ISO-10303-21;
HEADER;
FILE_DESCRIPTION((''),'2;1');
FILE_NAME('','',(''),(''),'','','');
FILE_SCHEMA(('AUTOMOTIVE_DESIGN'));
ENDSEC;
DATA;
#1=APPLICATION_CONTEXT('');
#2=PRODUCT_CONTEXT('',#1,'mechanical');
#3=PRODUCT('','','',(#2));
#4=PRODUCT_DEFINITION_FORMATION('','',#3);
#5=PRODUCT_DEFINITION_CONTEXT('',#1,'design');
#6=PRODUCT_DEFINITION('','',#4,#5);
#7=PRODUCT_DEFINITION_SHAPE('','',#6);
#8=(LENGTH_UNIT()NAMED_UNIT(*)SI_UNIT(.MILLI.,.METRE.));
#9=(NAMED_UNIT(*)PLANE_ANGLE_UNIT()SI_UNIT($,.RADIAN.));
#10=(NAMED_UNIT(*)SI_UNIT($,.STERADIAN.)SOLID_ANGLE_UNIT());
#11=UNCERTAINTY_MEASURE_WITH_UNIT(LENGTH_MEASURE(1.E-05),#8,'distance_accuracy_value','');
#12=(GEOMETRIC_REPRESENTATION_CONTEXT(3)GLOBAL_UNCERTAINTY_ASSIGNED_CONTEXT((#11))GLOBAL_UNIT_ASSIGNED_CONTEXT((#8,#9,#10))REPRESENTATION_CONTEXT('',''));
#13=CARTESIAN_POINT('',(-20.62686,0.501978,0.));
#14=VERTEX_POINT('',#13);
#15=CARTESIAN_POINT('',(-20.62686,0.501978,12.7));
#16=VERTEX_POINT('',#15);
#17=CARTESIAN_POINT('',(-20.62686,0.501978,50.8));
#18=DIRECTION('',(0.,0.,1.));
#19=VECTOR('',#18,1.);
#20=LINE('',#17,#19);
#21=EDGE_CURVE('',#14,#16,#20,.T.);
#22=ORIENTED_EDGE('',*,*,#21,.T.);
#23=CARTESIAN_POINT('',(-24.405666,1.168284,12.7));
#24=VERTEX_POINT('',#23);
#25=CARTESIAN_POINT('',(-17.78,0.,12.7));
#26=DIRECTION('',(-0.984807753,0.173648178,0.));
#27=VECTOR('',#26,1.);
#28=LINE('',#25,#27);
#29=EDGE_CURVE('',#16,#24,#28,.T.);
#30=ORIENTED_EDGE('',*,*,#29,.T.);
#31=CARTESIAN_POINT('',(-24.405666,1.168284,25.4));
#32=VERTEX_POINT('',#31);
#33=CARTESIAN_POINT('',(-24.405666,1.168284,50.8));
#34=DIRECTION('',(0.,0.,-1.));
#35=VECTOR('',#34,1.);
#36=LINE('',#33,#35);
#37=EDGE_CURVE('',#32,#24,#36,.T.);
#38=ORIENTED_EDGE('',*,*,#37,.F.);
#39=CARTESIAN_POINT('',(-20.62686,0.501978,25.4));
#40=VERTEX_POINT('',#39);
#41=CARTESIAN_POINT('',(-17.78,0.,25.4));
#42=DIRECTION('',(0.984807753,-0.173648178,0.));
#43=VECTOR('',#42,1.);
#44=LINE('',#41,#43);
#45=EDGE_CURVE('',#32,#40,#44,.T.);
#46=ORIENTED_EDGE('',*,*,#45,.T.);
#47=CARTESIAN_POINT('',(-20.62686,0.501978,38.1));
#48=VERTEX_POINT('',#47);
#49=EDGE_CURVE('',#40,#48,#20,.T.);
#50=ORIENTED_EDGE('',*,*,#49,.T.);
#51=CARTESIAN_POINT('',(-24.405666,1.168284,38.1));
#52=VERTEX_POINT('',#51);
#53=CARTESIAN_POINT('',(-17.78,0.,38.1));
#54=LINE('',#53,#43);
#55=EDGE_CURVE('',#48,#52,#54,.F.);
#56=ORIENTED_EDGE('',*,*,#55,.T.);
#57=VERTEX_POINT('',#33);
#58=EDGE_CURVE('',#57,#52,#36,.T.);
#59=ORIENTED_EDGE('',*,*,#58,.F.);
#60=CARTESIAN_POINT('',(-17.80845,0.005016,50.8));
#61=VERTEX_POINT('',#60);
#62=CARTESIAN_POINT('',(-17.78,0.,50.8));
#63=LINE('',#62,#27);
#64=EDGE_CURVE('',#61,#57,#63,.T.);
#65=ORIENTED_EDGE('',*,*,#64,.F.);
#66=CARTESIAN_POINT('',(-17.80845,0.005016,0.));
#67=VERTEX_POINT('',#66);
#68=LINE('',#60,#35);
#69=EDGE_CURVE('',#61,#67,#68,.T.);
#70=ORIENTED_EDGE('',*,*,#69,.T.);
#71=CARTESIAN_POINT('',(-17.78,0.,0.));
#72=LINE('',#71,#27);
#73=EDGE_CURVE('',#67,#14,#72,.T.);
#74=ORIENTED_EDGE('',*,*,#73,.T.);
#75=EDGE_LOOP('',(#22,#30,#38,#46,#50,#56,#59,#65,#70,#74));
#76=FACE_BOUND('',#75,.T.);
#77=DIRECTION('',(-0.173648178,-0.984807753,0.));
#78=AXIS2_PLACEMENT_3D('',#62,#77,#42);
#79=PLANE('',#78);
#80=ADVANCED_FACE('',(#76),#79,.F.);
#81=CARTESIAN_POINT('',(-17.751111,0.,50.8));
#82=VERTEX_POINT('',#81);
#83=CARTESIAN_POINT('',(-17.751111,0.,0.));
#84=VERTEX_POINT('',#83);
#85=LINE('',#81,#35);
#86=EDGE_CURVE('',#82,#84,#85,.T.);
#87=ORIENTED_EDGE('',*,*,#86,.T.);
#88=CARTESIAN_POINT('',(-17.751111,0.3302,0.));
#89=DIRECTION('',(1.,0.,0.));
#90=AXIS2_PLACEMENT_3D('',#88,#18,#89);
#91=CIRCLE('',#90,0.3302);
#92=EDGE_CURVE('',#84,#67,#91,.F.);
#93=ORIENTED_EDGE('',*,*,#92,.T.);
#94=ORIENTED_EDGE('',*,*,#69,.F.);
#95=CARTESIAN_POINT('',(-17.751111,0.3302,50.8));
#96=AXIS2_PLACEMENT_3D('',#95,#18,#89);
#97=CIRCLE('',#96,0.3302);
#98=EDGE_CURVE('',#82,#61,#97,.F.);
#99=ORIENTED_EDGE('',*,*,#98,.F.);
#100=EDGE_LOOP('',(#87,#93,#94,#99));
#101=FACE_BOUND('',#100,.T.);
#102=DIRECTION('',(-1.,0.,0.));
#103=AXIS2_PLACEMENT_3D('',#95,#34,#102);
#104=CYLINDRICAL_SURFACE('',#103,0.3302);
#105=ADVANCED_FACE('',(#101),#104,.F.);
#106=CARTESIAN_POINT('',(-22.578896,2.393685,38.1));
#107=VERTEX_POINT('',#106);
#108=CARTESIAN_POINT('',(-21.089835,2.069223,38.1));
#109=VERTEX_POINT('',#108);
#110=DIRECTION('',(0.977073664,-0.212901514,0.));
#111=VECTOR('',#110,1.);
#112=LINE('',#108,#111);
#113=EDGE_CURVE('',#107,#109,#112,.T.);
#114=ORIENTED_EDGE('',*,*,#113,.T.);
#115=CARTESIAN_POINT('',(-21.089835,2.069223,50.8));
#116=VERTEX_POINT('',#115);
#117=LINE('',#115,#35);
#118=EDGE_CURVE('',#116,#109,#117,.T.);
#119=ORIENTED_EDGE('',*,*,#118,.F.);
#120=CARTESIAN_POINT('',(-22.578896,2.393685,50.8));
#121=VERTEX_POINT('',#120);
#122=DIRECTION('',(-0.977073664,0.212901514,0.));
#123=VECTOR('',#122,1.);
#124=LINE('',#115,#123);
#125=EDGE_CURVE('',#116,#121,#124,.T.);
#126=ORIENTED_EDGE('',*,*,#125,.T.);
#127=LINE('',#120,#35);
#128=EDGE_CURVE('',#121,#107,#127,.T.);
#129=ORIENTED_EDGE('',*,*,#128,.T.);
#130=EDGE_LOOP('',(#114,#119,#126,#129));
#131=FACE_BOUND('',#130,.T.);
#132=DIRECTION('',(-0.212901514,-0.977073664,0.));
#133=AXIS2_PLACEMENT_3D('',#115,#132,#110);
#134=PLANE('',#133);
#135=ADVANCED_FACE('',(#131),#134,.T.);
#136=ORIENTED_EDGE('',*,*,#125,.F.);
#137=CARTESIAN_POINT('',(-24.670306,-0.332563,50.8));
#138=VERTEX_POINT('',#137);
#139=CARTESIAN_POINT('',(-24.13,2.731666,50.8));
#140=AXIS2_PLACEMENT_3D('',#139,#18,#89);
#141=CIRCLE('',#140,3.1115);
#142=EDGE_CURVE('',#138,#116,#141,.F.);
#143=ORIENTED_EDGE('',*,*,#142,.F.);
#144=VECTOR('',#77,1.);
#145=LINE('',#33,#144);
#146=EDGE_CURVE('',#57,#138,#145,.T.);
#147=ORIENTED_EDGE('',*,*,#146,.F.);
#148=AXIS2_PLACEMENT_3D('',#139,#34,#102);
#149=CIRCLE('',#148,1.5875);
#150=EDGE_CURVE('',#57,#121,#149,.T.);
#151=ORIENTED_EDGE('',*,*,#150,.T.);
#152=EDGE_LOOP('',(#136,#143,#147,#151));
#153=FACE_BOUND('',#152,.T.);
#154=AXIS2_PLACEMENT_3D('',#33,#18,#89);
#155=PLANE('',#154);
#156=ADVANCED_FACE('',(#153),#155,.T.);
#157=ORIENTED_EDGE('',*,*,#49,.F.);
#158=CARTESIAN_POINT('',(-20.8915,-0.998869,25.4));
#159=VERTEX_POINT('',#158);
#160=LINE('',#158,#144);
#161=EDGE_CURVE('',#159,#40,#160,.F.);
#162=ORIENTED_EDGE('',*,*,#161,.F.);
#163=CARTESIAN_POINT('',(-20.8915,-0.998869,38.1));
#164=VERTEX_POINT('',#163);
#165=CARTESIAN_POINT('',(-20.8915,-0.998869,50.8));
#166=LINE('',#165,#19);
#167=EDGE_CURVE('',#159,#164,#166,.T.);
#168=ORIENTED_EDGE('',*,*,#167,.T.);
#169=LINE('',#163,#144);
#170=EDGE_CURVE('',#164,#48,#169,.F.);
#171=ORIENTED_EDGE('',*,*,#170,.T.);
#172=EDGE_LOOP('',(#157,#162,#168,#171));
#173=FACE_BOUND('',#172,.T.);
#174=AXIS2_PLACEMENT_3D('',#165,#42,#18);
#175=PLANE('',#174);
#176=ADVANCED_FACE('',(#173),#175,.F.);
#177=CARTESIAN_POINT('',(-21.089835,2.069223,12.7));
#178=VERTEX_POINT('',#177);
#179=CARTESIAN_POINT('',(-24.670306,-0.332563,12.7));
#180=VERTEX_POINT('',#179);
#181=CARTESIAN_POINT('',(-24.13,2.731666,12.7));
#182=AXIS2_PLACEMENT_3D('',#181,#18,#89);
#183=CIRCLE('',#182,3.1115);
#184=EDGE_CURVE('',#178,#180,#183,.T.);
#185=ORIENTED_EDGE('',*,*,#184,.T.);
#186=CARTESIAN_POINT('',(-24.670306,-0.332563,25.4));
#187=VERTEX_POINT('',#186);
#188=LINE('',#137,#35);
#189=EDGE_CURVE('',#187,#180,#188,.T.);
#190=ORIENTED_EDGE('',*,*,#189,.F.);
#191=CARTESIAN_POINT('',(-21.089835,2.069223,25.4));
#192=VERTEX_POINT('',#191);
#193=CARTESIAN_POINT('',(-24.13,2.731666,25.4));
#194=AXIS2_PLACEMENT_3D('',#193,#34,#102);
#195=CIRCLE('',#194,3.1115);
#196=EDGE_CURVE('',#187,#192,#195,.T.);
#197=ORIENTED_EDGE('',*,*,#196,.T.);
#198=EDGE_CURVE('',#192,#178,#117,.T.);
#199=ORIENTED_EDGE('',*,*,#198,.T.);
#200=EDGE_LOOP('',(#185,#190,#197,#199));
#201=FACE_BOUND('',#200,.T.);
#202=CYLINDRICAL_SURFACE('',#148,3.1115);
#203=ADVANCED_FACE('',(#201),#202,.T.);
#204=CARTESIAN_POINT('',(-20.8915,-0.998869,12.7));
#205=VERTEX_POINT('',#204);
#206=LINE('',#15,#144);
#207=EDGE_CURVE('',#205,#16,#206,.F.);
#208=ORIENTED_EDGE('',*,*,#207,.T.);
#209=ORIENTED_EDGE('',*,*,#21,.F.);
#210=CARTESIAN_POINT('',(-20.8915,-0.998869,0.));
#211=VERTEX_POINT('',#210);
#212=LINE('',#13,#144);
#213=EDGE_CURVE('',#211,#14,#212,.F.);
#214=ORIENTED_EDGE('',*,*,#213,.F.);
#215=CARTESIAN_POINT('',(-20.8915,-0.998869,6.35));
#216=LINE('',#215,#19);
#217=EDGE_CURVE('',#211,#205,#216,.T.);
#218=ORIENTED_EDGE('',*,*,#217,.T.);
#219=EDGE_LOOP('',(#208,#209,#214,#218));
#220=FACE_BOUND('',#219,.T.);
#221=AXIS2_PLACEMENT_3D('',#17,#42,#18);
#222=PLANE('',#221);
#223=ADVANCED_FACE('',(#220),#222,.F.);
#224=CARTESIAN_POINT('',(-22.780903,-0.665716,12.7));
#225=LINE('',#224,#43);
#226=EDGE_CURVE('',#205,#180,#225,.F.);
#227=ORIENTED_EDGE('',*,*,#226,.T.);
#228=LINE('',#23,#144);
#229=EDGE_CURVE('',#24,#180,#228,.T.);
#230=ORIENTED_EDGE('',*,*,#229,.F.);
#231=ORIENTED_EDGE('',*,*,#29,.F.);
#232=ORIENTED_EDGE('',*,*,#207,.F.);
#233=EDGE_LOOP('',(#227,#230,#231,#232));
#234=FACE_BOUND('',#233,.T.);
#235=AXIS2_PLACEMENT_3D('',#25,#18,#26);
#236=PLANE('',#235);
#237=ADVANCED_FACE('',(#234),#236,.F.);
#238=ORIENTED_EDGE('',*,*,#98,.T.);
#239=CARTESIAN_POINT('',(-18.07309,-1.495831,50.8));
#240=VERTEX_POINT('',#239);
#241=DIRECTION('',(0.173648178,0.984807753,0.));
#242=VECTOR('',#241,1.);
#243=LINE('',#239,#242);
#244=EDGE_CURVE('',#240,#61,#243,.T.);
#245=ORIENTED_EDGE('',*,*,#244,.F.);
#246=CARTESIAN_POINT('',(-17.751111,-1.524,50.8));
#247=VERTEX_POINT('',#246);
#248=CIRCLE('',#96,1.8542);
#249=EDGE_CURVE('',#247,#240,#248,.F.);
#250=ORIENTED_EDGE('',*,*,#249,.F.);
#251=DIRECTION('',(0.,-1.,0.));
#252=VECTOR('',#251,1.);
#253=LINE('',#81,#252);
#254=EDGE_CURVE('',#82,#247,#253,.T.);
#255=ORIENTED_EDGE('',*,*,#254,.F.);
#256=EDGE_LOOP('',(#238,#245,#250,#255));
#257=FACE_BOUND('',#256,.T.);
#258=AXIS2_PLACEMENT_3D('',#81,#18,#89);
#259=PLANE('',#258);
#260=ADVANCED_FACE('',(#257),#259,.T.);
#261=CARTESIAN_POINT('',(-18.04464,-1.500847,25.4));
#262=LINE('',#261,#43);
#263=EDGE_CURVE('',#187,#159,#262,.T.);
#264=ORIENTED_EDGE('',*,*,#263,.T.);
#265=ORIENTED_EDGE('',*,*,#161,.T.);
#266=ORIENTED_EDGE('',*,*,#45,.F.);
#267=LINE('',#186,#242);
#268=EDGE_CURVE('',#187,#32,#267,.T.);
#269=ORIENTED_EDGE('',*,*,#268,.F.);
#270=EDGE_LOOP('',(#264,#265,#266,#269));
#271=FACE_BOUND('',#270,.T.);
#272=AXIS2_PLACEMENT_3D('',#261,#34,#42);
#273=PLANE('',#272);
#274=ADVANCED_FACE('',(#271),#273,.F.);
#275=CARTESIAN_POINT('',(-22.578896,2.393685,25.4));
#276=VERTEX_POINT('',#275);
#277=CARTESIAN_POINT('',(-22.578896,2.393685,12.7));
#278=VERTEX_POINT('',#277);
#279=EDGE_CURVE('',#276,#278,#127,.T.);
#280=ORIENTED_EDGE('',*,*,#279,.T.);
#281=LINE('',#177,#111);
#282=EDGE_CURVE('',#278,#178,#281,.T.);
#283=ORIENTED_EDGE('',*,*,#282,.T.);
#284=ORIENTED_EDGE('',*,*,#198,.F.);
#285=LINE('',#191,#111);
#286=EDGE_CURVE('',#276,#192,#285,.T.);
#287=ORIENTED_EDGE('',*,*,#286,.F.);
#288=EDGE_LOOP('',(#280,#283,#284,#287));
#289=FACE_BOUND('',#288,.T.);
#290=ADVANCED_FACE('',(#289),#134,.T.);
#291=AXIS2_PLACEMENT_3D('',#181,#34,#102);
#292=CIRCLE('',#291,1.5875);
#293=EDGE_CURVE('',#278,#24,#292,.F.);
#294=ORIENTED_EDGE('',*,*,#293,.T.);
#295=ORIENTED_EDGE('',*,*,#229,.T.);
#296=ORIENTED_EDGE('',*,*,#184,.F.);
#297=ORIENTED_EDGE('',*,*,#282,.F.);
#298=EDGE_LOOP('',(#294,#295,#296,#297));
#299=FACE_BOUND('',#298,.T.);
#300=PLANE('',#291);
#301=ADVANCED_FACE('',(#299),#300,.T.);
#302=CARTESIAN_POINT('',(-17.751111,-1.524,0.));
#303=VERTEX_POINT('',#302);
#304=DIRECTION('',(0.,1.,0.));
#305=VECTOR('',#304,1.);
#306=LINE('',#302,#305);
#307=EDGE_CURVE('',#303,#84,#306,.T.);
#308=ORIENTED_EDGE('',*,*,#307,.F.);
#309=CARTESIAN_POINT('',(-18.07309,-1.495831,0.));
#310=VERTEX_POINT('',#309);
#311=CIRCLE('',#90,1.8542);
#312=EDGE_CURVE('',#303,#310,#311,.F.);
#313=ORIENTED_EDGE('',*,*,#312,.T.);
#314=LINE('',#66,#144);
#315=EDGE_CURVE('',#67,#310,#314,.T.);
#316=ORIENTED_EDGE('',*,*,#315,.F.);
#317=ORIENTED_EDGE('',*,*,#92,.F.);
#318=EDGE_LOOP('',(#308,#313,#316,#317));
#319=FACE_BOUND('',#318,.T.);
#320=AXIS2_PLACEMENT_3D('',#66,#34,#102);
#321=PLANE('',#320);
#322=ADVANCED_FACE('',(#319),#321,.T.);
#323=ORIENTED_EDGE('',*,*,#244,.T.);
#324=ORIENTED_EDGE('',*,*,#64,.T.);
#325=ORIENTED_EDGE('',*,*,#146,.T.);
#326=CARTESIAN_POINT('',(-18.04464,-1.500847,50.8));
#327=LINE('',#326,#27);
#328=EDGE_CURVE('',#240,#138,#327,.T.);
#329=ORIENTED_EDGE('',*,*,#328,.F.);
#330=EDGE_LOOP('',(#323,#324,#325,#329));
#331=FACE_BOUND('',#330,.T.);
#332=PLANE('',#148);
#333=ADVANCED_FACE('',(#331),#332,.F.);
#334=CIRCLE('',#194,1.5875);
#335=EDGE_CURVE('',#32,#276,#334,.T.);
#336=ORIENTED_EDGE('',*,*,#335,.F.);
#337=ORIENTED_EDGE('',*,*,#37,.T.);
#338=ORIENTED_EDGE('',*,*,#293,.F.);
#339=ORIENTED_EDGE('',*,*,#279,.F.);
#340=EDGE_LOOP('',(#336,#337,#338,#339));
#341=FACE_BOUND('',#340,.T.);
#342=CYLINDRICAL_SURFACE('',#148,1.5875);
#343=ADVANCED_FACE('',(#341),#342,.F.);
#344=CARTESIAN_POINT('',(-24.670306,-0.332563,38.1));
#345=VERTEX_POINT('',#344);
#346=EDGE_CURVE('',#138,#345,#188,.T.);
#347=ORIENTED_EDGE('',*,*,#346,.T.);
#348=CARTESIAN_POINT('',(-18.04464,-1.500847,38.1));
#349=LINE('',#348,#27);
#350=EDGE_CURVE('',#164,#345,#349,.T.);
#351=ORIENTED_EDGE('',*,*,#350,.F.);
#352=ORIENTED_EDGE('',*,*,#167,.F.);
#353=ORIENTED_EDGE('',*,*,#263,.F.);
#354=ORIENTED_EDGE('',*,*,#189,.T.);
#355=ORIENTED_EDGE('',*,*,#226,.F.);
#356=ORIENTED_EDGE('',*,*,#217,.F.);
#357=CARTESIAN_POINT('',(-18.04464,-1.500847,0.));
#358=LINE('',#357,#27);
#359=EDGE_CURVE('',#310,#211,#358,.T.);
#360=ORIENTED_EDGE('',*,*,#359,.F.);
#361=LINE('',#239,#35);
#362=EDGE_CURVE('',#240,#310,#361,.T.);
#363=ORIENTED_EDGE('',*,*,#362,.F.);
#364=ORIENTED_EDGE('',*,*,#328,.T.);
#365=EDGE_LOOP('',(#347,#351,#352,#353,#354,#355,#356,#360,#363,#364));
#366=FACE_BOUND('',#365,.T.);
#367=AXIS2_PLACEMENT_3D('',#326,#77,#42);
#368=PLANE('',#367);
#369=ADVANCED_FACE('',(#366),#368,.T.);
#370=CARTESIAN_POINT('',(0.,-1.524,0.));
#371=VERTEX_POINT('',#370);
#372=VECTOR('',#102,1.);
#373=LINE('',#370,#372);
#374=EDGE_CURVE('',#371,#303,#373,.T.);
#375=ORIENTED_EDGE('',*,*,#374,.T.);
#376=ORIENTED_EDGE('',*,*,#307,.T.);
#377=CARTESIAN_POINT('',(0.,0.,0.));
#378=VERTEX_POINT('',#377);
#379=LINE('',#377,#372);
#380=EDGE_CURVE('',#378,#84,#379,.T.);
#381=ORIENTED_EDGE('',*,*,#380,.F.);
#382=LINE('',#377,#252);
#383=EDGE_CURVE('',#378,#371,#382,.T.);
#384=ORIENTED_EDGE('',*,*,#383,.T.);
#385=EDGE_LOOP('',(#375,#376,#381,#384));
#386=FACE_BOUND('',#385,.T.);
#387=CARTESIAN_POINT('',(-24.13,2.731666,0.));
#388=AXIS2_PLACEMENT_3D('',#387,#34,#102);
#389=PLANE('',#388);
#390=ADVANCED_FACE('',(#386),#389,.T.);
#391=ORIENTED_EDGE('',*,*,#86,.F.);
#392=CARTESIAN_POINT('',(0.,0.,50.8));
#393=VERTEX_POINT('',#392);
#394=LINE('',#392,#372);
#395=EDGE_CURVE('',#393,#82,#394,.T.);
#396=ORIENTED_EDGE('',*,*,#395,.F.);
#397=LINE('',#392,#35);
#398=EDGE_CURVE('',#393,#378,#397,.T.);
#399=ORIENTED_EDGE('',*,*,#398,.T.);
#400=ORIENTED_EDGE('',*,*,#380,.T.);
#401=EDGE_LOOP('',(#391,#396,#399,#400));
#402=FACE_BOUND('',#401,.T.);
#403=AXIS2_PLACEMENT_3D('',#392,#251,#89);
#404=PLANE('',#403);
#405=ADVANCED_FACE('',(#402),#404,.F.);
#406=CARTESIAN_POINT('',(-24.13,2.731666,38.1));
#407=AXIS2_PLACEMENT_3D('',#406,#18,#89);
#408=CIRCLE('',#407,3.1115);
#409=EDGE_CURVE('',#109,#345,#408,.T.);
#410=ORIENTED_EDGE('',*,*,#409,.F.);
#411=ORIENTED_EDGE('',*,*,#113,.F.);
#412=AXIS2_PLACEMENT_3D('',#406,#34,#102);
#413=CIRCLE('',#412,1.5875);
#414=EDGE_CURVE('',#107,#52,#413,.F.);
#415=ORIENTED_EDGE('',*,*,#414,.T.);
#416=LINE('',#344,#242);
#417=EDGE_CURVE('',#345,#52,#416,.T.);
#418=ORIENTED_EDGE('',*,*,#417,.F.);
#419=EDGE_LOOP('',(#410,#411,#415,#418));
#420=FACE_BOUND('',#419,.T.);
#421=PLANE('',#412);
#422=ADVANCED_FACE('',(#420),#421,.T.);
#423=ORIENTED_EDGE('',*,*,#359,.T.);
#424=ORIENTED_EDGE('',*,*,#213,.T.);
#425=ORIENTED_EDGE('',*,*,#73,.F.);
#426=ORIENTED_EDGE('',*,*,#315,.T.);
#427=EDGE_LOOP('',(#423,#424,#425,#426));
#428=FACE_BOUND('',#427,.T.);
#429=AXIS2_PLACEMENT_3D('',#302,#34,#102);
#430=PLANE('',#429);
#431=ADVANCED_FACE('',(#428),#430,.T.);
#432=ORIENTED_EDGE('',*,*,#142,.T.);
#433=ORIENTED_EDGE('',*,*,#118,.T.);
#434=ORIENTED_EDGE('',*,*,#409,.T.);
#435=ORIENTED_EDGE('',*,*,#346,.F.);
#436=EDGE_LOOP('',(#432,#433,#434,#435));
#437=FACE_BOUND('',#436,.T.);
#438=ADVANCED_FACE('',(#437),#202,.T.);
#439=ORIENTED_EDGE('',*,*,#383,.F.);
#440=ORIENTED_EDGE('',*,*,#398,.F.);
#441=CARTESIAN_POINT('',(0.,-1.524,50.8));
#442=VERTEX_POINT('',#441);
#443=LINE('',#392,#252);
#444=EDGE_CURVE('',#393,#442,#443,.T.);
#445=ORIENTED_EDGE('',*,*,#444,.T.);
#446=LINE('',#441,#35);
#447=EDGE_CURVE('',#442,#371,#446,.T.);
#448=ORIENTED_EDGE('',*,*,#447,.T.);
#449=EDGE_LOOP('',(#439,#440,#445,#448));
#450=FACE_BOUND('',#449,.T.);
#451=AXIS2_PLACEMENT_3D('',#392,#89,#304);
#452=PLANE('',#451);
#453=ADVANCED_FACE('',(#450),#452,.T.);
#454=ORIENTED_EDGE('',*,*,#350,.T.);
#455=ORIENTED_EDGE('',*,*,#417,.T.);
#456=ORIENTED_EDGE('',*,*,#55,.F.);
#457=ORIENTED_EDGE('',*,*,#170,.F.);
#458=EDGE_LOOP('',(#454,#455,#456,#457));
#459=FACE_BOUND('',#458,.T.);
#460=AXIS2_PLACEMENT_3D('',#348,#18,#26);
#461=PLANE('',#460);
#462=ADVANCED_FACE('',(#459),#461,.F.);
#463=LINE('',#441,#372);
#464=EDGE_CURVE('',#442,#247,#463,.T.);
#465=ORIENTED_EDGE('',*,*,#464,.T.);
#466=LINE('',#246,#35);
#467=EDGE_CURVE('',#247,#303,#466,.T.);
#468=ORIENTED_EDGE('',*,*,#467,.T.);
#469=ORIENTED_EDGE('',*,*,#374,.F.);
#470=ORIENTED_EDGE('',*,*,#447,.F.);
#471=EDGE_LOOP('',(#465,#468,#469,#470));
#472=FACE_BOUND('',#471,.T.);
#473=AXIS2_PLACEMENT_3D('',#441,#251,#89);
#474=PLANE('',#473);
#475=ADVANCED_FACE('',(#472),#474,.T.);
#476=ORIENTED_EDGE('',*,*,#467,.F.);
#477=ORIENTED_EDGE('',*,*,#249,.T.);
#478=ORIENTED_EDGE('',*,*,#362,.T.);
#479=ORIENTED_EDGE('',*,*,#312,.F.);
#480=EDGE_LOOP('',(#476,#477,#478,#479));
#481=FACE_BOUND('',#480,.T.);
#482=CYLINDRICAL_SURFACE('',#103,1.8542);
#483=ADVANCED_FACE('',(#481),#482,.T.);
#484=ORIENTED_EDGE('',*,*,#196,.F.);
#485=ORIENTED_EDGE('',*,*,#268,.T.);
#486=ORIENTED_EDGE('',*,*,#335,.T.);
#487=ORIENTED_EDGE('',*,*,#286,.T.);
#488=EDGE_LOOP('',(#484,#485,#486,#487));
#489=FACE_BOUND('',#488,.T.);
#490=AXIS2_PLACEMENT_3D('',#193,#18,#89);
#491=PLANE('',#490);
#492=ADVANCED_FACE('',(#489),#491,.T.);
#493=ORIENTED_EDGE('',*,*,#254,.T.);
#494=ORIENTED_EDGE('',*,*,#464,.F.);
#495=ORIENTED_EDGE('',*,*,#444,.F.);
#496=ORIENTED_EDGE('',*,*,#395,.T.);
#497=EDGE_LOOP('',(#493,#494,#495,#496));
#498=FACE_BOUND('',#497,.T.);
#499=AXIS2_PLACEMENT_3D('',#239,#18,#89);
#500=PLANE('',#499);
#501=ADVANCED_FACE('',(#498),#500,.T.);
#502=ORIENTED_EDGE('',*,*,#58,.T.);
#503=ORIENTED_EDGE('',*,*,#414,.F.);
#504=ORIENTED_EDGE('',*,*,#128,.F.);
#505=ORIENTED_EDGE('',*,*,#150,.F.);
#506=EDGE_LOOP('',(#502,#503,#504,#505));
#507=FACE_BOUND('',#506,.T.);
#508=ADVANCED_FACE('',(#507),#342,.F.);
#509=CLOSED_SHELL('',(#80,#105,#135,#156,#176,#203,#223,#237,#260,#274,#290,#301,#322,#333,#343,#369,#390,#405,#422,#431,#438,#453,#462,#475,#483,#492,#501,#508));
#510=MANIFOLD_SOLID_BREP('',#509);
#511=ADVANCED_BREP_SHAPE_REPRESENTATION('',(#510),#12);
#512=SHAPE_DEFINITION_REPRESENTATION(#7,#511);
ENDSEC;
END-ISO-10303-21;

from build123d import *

# Parameters (mm, degrees)
BRIDA_BASE1_DEPTH     = 50.8
CORTAR_EXTRUIR1_START = 25.4
CORTAR_EXTRUIR1_DEPTH = 12.7
MATRIZL1_COUNT        = 2
MATRIZL1_PITCH        = 25.4


# Read off the part's stored shape, not the designer's step: Cortar-Extruir1
# Sheet-metal steps are written as plain solids
with BuildPart() as part:
    # Croquis1 → Brida base1 (new body)
    with BuildSketch(Plane.XY):
        with BuildLine():
            Line((0, 0), (-17.751111243, 0))
            ThreePointArc((-17.751111243, 0), (-17.77989007, 0.001256511), (-17.808449872, 0.00501648))
            Line((-17.808449872, 0.00501648), (-24.405666482, 1.168283766))
            ThreePointArc((-24.405666482, 1.168283766), (-25.014357108, 4.05002443), (-22.578895558, 2.393684921))
            Line((-22.578895558, 2.393684921), (-21.089835293, 2.069223014))
            ThreePointArc((-21.089835293, 2.069223014), (-25.863339932, 5.315648452), (-24.670306305, -0.33256325))
            Line((-24.670306305, -0.33256325), (-18.073089694, -1.495830536))
            ThreePointArc((-18.073089694, -1.495830536), (-17.912715421, -1.516944209), (-17.751111243, -1.524))
            Line((-17.751111243, -1.524), (0, -1.524))
            Line((0, -1.524), (0, 0))
        make_face()
    extrude(amount=BRIDA_BASE1_DEPTH)

    # Cortar-Extruir1 outline → Cortar-Extruir1 (cut)
    with BuildSketch(Plane.XY.offset(CORTAR_EXTRUIR1_START)):
        with BuildLine():
            Line((-24.670306305, -0.33256325), (-20.8915, -0.998868756))
            Line((-20.8915, -0.998868756), (-20.626860177, 0.50197826))
            Line((-20.626860177, 0.50197826), (-24.405666482, 1.168283766))
            ThreePointArc((-24.405666482, 1.168283766), (-25.014357108, 4.05002443), (-22.578895558, 2.393684921))
            Line((-22.578895558, 2.393684921), (-21.089835293, 2.069223014))
            ThreePointArc((-21.089835293, 2.069223014), (-25.863339932, 5.315648452), (-24.670306305, -0.33256325))
        make_face()
    cortar_extruir1 = extrude(amount=CORTAR_EXTRUIR1_DEPTH, mode=Mode.SUBTRACT)

    # MatrizL1: Cortar-Extruir1 ×2
    with Locations(*[(0, 0, -i * MATRIZL1_PITCH) for i in range(1, MATRIZL1_COUNT)]):
        add(cortar_extruir1, mode=Mode.SUBTRACT)


solid = part.part
